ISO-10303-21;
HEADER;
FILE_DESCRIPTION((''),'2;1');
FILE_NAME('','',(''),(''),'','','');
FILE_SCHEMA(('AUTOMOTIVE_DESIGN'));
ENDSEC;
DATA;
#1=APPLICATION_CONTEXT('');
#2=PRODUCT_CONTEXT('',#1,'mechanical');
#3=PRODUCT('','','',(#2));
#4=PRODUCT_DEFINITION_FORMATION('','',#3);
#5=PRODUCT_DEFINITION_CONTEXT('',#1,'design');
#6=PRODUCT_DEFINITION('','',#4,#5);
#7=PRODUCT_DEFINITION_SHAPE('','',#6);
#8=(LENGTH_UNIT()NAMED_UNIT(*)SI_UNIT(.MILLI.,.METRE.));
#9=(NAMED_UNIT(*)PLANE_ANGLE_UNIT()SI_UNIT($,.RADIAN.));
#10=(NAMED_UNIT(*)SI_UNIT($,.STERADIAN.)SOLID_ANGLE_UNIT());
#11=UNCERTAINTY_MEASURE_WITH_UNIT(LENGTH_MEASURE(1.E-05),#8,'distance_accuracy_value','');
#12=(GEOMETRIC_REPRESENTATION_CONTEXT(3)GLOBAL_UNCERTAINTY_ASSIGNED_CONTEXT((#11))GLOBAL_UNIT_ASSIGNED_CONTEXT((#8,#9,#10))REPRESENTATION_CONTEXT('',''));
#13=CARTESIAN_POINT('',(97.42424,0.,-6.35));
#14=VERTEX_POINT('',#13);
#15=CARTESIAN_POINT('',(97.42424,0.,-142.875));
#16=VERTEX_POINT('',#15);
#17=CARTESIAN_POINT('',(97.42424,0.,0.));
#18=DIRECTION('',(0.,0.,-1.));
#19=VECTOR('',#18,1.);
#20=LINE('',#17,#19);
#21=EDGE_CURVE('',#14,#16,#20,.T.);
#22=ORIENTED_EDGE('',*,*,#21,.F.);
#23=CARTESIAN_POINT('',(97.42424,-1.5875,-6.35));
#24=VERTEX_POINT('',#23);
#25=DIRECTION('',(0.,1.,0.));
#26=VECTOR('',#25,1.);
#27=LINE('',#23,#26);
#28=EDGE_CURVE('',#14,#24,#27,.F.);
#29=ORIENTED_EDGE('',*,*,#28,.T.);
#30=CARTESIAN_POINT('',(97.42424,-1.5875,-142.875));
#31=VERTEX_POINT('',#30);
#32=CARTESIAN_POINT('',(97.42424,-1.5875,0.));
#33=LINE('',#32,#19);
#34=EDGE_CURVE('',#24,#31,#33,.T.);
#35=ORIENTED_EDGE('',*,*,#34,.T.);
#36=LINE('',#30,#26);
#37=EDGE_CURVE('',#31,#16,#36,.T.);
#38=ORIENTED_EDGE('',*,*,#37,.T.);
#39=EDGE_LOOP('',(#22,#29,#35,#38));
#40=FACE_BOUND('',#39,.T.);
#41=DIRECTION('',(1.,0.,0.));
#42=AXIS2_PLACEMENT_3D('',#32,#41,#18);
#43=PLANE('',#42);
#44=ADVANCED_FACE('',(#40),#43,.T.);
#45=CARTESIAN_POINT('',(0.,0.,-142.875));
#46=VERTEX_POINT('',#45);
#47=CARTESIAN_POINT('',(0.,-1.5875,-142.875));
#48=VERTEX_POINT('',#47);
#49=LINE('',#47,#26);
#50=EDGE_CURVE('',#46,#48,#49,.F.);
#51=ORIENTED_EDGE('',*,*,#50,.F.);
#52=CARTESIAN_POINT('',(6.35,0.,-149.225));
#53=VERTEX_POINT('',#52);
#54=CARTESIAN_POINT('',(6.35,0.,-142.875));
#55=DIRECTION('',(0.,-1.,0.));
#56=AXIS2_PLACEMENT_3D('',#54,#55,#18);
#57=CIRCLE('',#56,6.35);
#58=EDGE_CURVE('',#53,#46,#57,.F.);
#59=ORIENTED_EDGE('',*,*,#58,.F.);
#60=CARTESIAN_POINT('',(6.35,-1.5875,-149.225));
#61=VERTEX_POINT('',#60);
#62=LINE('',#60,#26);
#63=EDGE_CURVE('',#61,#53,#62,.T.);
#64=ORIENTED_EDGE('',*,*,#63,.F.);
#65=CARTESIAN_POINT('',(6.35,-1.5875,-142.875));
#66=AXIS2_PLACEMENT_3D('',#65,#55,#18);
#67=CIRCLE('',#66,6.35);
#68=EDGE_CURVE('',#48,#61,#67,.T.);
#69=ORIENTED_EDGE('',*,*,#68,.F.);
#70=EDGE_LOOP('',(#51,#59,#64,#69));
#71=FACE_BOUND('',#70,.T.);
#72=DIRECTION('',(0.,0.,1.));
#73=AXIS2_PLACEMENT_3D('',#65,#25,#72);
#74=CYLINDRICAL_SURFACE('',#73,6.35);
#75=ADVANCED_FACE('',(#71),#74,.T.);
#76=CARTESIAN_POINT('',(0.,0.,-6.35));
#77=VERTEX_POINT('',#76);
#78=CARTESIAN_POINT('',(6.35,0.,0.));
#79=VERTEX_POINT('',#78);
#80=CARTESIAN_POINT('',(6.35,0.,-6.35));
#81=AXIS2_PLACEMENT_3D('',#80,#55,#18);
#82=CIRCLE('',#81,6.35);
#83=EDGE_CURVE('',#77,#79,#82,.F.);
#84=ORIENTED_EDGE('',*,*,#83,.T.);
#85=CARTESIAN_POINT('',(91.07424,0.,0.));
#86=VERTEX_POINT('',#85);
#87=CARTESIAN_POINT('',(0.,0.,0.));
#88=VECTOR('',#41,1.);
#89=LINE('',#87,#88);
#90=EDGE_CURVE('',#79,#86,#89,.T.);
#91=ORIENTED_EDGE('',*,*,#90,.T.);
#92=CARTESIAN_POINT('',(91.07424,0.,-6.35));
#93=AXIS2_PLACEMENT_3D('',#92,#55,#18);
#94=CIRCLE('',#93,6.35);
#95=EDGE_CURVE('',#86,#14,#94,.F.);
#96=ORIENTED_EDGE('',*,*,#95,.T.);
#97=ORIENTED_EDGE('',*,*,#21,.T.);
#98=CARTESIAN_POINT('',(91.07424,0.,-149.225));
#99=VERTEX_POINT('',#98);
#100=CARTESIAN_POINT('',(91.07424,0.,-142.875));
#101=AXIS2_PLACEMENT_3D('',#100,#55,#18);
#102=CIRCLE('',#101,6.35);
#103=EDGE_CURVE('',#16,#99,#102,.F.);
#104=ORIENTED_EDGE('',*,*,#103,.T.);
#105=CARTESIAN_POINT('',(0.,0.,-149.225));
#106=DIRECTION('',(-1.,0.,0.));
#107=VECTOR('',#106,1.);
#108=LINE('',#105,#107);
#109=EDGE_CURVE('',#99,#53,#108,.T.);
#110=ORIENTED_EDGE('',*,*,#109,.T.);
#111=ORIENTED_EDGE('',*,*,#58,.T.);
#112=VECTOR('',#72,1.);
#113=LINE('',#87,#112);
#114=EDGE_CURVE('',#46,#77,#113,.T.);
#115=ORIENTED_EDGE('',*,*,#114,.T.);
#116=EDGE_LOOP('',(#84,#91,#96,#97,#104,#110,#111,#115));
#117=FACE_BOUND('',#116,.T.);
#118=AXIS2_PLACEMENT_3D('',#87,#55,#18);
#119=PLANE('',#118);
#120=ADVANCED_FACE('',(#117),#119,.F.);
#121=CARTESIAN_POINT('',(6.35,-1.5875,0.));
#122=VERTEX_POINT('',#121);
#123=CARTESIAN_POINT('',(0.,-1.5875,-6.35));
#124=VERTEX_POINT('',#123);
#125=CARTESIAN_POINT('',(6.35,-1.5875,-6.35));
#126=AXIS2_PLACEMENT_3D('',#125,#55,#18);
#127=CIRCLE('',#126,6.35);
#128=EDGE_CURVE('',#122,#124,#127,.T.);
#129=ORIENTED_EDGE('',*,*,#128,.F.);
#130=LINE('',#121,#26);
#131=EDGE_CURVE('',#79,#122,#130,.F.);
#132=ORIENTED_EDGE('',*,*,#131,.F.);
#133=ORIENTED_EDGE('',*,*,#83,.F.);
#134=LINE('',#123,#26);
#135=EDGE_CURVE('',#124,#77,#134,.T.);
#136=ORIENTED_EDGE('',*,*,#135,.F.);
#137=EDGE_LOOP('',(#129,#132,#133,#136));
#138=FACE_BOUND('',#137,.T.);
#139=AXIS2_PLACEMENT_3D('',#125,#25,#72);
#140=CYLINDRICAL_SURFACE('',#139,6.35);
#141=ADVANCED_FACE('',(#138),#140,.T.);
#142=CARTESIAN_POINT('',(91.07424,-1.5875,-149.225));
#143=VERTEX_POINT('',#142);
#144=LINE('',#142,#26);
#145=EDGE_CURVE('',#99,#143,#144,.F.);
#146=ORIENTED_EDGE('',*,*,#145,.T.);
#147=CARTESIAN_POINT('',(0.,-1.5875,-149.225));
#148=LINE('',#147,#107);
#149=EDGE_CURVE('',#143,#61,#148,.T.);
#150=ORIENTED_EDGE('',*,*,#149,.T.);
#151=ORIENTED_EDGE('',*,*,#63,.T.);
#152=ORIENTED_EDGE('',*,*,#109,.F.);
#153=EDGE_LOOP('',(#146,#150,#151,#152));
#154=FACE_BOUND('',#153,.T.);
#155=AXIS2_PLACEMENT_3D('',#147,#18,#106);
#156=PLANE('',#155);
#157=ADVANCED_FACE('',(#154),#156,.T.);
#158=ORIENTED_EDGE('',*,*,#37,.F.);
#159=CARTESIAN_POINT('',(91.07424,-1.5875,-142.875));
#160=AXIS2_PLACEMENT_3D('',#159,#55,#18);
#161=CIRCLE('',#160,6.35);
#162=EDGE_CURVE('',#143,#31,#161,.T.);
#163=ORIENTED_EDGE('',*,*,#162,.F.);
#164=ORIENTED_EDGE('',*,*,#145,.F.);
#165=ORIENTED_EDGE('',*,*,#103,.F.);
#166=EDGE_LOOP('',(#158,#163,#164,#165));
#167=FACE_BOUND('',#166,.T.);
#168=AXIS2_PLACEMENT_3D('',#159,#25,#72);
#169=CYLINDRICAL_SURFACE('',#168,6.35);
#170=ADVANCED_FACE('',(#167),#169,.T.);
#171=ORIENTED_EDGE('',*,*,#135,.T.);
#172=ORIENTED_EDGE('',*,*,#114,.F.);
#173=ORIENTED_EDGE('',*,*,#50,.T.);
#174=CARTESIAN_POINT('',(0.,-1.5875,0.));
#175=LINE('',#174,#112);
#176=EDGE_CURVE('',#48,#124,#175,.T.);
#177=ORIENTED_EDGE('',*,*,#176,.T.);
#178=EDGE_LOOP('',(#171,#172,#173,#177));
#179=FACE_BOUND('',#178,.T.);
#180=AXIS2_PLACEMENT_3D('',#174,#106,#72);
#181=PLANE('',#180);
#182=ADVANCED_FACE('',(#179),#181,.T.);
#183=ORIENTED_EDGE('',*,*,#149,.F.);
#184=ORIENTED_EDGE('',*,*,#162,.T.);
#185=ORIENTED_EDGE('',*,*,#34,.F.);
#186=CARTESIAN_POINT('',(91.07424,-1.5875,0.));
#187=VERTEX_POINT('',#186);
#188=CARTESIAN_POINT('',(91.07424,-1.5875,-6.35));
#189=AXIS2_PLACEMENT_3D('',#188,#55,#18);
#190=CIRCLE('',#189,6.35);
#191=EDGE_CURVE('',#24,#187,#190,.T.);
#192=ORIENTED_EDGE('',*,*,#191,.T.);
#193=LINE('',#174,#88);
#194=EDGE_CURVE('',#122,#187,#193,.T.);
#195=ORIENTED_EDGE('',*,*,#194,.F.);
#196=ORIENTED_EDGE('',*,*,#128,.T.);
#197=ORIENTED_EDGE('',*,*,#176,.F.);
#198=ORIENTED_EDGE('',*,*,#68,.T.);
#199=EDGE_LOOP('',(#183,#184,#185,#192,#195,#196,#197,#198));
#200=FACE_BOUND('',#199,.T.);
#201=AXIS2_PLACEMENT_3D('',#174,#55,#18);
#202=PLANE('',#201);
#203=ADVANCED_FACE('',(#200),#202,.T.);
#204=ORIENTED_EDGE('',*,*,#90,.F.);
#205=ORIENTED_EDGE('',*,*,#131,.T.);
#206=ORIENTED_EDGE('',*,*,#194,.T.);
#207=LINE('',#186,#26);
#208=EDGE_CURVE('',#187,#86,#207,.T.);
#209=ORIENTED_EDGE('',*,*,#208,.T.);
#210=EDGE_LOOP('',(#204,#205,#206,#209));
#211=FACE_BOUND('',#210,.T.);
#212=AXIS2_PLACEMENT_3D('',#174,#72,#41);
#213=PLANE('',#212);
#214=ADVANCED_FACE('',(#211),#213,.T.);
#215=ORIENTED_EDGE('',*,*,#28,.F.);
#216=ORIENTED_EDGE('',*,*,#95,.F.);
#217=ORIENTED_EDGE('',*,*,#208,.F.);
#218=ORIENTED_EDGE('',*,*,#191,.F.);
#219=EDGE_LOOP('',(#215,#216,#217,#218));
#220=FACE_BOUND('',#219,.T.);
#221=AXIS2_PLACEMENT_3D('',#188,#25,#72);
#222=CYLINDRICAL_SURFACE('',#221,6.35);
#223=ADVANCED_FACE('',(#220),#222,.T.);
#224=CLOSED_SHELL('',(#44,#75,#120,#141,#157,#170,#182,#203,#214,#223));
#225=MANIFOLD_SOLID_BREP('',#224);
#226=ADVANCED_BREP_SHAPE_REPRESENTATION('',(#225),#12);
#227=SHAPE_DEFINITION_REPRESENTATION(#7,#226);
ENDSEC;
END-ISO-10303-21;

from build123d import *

# Parameters (mm, degrees)
SKETCH1_W          = 97.42424
SKETCH1_H          = 149.225
BASE_FLANGE1_DEPTH = 1.5875
FILLET1_R          = 6.35


# Sheet-metal steps are written as plain solids
with BuildPart() as part:
    # Sketch1 → Base-Flange1 (new body)
    with BuildSketch(Plane(origin=(0, 0, 0), x_dir=(1, 0, 0), z_dir=(0, 1, 0))):
        with Locations((48.71212, 74.6125)):
            Rectangle(SKETCH1_W, SKETCH1_H)
    extrude(amount=-BASE_FLANGE1_DEPTH)

    # Fillet1
    fillet1_edges = [part.edges().sort_by_distance(p)[0] for p in [
        (0, -0.79375, -149.225),
        (97.42424, -0.79375, -149.225),
        (97.42424, -0.79375, 0),
        (0, -0.79375, 0),
    ]]
    fillet(fillet1_edges, radius=FILLET1_R)


solid = part.part
